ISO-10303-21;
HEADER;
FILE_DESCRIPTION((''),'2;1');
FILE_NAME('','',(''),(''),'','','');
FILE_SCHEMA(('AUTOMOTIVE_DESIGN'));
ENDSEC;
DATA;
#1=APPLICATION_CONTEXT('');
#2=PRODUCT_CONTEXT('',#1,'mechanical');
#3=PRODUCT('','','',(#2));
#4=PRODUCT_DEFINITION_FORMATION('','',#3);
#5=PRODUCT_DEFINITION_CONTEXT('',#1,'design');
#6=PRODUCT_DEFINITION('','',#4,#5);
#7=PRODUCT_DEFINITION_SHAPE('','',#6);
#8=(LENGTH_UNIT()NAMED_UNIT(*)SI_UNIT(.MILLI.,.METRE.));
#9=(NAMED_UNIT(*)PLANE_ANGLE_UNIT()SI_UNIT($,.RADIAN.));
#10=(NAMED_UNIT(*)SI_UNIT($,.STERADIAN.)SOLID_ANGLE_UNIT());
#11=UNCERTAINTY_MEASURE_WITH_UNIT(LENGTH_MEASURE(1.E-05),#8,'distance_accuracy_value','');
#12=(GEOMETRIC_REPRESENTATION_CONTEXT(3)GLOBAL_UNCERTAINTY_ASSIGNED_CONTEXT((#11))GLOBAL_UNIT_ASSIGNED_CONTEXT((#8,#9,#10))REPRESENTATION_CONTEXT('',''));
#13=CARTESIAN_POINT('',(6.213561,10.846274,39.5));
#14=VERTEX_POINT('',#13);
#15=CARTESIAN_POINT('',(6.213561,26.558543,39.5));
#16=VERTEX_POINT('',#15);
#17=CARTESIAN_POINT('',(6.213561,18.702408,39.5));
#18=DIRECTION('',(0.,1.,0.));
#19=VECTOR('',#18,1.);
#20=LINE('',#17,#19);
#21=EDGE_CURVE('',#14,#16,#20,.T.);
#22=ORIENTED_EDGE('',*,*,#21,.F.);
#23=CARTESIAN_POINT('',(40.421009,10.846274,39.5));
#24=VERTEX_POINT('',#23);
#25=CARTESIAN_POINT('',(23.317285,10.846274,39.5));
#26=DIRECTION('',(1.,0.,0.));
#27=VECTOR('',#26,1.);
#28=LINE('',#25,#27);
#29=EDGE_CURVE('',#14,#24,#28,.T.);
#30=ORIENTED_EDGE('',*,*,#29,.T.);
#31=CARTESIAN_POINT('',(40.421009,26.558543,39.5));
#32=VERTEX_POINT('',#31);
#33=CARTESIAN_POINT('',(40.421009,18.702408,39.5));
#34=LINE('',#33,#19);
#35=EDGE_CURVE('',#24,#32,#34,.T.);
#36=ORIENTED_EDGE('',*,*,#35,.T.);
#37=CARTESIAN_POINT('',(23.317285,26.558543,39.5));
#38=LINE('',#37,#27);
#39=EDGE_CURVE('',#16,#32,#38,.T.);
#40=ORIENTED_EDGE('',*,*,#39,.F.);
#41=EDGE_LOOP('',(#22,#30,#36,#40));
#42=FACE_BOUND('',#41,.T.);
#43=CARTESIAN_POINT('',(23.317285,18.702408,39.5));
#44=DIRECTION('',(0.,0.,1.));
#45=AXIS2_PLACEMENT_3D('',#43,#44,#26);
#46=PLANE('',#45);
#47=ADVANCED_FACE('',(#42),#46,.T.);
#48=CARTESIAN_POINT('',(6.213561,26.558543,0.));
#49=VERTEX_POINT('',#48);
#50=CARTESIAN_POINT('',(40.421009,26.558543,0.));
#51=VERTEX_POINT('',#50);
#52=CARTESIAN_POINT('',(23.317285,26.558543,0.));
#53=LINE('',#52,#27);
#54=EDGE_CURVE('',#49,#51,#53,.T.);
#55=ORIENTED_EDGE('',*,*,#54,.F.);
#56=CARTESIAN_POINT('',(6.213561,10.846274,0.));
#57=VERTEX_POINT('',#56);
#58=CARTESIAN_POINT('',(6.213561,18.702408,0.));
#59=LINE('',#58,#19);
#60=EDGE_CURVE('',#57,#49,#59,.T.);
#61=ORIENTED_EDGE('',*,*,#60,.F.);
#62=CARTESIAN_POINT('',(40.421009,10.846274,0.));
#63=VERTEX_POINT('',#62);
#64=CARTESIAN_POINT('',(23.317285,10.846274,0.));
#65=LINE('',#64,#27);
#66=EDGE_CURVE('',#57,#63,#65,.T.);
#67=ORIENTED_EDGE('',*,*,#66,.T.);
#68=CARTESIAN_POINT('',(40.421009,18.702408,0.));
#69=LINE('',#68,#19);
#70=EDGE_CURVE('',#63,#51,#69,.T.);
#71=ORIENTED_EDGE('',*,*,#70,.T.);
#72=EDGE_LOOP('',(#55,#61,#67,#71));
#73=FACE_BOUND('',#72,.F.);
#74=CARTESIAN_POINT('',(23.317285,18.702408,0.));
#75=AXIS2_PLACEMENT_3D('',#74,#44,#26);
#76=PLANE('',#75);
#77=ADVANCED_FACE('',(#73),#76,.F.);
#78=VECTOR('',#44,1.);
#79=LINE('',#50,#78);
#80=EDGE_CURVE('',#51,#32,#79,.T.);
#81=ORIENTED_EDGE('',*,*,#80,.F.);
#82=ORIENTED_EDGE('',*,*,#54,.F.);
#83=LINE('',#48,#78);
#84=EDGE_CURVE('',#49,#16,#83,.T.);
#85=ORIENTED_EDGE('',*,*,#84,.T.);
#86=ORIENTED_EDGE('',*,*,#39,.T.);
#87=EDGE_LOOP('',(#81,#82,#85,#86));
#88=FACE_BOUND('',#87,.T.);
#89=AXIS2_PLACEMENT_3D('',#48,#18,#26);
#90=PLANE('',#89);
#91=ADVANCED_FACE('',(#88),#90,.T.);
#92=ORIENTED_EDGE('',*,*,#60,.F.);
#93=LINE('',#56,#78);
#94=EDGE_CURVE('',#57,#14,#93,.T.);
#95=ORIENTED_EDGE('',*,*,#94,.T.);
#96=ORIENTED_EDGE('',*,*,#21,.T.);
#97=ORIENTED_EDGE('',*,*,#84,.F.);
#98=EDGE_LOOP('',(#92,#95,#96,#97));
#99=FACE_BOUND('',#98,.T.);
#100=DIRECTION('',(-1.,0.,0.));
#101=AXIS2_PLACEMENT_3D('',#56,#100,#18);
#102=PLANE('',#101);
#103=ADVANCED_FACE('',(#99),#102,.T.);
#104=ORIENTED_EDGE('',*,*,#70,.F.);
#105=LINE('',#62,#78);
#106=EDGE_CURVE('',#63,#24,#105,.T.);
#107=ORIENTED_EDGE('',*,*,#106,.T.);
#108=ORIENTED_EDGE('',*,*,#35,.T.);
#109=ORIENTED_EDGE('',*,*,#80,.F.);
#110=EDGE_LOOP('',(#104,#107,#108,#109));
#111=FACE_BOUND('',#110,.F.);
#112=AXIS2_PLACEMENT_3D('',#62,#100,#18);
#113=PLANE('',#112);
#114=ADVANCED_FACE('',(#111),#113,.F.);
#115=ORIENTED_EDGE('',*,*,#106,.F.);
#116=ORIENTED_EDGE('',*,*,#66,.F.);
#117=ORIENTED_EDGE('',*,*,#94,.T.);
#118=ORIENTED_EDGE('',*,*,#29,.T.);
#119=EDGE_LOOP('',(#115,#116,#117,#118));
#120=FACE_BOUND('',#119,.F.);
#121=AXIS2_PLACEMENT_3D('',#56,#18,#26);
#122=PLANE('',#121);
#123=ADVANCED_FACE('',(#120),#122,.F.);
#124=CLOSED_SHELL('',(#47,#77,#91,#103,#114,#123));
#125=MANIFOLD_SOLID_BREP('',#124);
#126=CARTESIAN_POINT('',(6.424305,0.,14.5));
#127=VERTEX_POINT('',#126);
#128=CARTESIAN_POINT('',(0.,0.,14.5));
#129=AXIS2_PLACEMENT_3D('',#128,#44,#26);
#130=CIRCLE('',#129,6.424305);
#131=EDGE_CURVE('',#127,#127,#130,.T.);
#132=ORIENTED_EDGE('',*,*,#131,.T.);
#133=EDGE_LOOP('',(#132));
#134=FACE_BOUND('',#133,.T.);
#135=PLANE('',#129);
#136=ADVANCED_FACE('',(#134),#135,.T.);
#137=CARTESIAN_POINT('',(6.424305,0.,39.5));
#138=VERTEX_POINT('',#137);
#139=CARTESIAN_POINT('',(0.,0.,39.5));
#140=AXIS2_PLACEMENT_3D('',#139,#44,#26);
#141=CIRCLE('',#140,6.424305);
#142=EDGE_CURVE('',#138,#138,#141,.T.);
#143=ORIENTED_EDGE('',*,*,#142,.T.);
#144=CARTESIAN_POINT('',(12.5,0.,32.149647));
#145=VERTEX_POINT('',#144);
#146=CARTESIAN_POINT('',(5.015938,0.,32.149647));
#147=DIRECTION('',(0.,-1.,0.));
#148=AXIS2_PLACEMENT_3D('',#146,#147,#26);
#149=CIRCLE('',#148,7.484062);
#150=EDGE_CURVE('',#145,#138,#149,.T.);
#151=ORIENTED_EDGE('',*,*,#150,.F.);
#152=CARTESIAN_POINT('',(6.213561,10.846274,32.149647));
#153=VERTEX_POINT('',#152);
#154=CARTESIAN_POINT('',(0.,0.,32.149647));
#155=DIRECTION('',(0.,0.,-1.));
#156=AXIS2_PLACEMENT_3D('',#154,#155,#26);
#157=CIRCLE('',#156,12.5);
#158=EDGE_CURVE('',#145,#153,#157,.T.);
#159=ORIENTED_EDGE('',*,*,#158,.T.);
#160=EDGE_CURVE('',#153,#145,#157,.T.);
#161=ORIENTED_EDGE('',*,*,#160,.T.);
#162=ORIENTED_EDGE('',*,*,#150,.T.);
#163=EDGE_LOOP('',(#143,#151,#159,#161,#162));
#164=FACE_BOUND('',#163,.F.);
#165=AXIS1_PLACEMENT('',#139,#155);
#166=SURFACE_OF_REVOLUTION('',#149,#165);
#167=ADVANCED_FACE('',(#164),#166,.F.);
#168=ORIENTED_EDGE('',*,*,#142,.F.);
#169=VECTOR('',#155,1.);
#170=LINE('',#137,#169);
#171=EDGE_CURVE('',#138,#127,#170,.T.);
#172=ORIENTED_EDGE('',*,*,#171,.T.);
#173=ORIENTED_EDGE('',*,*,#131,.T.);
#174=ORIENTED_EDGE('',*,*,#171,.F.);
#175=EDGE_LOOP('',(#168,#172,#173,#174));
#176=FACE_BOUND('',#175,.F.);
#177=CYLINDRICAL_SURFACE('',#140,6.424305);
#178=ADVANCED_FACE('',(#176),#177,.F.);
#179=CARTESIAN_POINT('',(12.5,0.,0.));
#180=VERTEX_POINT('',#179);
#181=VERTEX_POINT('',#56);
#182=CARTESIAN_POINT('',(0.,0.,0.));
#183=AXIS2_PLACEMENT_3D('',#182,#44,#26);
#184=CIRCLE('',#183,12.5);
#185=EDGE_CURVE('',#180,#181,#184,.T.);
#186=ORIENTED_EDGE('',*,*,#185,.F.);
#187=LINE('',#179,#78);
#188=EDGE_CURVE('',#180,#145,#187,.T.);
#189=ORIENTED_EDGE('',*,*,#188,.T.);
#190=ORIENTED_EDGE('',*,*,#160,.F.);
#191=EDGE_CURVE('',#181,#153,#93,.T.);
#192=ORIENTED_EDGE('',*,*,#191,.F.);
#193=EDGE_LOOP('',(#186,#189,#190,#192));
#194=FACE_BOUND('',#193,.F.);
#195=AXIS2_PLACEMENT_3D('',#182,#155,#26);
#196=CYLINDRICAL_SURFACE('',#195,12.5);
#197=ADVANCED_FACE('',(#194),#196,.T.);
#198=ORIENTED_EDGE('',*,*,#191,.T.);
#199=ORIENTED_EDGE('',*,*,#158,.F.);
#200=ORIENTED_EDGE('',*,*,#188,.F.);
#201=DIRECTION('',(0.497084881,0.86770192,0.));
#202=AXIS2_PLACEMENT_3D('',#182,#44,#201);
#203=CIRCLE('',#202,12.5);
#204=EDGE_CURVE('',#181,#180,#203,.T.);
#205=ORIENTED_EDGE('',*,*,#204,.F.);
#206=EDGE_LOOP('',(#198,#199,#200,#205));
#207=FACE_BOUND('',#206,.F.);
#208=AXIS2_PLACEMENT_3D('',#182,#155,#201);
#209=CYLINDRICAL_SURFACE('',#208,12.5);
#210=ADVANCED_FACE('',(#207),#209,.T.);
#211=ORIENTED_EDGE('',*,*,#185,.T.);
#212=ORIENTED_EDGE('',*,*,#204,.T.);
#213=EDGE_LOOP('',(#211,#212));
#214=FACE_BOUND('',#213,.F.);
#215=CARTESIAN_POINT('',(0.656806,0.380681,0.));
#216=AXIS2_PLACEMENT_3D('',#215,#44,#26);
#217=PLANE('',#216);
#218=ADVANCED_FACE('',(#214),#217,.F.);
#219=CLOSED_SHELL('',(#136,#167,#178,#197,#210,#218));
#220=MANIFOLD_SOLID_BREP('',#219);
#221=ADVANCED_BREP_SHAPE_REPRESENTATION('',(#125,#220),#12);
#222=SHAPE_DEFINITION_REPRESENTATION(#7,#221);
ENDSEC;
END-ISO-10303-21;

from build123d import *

# Parameters (mm, degrees)
F1_DEPTH = 39.5
F0_W     = 34.2074480574
F0_H     = 15.712268627
F2_R     = 6.4243054604
F3_DEPTH = 25


# Not quite as in the source:
# - a fillet or chamfer that OpenCascade refuses, or shapes differently, is made with other operations: its cross-section is extruded or revolved along the edge and cut away or added


with BuildPart() as f1:
    # F0 (on Top) → F1 (new body)
    with BuildSketch(Plane.XY):
        with BuildLine():
            ThreePointArc((6.2135610063, 10.8462739971), (-10.8147934002, -6.268193018), (12.5, 0))
            ThreePointArc((12.5, 0), (10.8147934002, 6.268193018), (6.2135610063, 10.8462739971))
        make_face()
    extrude(amount=F1_DEPTH)

    # F2 (on face) → F3 (cut)
    with BuildSketch(Plane.XY.offset(39.5)):
        Circle(F2_R)
    extrude(amount=-F3_DEPTH, mode=Mode.SUBTRACT)

    # F4: fillet of radius 7.4840620434 on 1 edges, made by hand

    # F4_s1 → F4_t2 (revolve, cut)
    with BuildSketch(Plane.XZ):
        with BuildLine():
            ThreePointArc((12.5, 32.1496472436), (10.7844513893, 36.9178164358), (6.4243054604, 39.5))
            Line((6.4243054604, 39.5), (12.5, 39.5))
            Line((12.5, 39.5), (12.5, 32.1496472436))
        make_face()
    revolve(axis=Axis((0, 0, 39.5), (0, 0, -1)), mode=Mode.SUBTRACT)


with BuildPart() as f1b:
    # F0 (on Top) → F1, piece 2 (new body)
    with BuildSketch(Plane.XY):
        with Locations((23.317285035, 18.7024083106)):
            Rectangle(F0_W, F0_H)
    extrude(amount=F1_DEPTH)


solid = Compound([f1.part, f1b.part])
